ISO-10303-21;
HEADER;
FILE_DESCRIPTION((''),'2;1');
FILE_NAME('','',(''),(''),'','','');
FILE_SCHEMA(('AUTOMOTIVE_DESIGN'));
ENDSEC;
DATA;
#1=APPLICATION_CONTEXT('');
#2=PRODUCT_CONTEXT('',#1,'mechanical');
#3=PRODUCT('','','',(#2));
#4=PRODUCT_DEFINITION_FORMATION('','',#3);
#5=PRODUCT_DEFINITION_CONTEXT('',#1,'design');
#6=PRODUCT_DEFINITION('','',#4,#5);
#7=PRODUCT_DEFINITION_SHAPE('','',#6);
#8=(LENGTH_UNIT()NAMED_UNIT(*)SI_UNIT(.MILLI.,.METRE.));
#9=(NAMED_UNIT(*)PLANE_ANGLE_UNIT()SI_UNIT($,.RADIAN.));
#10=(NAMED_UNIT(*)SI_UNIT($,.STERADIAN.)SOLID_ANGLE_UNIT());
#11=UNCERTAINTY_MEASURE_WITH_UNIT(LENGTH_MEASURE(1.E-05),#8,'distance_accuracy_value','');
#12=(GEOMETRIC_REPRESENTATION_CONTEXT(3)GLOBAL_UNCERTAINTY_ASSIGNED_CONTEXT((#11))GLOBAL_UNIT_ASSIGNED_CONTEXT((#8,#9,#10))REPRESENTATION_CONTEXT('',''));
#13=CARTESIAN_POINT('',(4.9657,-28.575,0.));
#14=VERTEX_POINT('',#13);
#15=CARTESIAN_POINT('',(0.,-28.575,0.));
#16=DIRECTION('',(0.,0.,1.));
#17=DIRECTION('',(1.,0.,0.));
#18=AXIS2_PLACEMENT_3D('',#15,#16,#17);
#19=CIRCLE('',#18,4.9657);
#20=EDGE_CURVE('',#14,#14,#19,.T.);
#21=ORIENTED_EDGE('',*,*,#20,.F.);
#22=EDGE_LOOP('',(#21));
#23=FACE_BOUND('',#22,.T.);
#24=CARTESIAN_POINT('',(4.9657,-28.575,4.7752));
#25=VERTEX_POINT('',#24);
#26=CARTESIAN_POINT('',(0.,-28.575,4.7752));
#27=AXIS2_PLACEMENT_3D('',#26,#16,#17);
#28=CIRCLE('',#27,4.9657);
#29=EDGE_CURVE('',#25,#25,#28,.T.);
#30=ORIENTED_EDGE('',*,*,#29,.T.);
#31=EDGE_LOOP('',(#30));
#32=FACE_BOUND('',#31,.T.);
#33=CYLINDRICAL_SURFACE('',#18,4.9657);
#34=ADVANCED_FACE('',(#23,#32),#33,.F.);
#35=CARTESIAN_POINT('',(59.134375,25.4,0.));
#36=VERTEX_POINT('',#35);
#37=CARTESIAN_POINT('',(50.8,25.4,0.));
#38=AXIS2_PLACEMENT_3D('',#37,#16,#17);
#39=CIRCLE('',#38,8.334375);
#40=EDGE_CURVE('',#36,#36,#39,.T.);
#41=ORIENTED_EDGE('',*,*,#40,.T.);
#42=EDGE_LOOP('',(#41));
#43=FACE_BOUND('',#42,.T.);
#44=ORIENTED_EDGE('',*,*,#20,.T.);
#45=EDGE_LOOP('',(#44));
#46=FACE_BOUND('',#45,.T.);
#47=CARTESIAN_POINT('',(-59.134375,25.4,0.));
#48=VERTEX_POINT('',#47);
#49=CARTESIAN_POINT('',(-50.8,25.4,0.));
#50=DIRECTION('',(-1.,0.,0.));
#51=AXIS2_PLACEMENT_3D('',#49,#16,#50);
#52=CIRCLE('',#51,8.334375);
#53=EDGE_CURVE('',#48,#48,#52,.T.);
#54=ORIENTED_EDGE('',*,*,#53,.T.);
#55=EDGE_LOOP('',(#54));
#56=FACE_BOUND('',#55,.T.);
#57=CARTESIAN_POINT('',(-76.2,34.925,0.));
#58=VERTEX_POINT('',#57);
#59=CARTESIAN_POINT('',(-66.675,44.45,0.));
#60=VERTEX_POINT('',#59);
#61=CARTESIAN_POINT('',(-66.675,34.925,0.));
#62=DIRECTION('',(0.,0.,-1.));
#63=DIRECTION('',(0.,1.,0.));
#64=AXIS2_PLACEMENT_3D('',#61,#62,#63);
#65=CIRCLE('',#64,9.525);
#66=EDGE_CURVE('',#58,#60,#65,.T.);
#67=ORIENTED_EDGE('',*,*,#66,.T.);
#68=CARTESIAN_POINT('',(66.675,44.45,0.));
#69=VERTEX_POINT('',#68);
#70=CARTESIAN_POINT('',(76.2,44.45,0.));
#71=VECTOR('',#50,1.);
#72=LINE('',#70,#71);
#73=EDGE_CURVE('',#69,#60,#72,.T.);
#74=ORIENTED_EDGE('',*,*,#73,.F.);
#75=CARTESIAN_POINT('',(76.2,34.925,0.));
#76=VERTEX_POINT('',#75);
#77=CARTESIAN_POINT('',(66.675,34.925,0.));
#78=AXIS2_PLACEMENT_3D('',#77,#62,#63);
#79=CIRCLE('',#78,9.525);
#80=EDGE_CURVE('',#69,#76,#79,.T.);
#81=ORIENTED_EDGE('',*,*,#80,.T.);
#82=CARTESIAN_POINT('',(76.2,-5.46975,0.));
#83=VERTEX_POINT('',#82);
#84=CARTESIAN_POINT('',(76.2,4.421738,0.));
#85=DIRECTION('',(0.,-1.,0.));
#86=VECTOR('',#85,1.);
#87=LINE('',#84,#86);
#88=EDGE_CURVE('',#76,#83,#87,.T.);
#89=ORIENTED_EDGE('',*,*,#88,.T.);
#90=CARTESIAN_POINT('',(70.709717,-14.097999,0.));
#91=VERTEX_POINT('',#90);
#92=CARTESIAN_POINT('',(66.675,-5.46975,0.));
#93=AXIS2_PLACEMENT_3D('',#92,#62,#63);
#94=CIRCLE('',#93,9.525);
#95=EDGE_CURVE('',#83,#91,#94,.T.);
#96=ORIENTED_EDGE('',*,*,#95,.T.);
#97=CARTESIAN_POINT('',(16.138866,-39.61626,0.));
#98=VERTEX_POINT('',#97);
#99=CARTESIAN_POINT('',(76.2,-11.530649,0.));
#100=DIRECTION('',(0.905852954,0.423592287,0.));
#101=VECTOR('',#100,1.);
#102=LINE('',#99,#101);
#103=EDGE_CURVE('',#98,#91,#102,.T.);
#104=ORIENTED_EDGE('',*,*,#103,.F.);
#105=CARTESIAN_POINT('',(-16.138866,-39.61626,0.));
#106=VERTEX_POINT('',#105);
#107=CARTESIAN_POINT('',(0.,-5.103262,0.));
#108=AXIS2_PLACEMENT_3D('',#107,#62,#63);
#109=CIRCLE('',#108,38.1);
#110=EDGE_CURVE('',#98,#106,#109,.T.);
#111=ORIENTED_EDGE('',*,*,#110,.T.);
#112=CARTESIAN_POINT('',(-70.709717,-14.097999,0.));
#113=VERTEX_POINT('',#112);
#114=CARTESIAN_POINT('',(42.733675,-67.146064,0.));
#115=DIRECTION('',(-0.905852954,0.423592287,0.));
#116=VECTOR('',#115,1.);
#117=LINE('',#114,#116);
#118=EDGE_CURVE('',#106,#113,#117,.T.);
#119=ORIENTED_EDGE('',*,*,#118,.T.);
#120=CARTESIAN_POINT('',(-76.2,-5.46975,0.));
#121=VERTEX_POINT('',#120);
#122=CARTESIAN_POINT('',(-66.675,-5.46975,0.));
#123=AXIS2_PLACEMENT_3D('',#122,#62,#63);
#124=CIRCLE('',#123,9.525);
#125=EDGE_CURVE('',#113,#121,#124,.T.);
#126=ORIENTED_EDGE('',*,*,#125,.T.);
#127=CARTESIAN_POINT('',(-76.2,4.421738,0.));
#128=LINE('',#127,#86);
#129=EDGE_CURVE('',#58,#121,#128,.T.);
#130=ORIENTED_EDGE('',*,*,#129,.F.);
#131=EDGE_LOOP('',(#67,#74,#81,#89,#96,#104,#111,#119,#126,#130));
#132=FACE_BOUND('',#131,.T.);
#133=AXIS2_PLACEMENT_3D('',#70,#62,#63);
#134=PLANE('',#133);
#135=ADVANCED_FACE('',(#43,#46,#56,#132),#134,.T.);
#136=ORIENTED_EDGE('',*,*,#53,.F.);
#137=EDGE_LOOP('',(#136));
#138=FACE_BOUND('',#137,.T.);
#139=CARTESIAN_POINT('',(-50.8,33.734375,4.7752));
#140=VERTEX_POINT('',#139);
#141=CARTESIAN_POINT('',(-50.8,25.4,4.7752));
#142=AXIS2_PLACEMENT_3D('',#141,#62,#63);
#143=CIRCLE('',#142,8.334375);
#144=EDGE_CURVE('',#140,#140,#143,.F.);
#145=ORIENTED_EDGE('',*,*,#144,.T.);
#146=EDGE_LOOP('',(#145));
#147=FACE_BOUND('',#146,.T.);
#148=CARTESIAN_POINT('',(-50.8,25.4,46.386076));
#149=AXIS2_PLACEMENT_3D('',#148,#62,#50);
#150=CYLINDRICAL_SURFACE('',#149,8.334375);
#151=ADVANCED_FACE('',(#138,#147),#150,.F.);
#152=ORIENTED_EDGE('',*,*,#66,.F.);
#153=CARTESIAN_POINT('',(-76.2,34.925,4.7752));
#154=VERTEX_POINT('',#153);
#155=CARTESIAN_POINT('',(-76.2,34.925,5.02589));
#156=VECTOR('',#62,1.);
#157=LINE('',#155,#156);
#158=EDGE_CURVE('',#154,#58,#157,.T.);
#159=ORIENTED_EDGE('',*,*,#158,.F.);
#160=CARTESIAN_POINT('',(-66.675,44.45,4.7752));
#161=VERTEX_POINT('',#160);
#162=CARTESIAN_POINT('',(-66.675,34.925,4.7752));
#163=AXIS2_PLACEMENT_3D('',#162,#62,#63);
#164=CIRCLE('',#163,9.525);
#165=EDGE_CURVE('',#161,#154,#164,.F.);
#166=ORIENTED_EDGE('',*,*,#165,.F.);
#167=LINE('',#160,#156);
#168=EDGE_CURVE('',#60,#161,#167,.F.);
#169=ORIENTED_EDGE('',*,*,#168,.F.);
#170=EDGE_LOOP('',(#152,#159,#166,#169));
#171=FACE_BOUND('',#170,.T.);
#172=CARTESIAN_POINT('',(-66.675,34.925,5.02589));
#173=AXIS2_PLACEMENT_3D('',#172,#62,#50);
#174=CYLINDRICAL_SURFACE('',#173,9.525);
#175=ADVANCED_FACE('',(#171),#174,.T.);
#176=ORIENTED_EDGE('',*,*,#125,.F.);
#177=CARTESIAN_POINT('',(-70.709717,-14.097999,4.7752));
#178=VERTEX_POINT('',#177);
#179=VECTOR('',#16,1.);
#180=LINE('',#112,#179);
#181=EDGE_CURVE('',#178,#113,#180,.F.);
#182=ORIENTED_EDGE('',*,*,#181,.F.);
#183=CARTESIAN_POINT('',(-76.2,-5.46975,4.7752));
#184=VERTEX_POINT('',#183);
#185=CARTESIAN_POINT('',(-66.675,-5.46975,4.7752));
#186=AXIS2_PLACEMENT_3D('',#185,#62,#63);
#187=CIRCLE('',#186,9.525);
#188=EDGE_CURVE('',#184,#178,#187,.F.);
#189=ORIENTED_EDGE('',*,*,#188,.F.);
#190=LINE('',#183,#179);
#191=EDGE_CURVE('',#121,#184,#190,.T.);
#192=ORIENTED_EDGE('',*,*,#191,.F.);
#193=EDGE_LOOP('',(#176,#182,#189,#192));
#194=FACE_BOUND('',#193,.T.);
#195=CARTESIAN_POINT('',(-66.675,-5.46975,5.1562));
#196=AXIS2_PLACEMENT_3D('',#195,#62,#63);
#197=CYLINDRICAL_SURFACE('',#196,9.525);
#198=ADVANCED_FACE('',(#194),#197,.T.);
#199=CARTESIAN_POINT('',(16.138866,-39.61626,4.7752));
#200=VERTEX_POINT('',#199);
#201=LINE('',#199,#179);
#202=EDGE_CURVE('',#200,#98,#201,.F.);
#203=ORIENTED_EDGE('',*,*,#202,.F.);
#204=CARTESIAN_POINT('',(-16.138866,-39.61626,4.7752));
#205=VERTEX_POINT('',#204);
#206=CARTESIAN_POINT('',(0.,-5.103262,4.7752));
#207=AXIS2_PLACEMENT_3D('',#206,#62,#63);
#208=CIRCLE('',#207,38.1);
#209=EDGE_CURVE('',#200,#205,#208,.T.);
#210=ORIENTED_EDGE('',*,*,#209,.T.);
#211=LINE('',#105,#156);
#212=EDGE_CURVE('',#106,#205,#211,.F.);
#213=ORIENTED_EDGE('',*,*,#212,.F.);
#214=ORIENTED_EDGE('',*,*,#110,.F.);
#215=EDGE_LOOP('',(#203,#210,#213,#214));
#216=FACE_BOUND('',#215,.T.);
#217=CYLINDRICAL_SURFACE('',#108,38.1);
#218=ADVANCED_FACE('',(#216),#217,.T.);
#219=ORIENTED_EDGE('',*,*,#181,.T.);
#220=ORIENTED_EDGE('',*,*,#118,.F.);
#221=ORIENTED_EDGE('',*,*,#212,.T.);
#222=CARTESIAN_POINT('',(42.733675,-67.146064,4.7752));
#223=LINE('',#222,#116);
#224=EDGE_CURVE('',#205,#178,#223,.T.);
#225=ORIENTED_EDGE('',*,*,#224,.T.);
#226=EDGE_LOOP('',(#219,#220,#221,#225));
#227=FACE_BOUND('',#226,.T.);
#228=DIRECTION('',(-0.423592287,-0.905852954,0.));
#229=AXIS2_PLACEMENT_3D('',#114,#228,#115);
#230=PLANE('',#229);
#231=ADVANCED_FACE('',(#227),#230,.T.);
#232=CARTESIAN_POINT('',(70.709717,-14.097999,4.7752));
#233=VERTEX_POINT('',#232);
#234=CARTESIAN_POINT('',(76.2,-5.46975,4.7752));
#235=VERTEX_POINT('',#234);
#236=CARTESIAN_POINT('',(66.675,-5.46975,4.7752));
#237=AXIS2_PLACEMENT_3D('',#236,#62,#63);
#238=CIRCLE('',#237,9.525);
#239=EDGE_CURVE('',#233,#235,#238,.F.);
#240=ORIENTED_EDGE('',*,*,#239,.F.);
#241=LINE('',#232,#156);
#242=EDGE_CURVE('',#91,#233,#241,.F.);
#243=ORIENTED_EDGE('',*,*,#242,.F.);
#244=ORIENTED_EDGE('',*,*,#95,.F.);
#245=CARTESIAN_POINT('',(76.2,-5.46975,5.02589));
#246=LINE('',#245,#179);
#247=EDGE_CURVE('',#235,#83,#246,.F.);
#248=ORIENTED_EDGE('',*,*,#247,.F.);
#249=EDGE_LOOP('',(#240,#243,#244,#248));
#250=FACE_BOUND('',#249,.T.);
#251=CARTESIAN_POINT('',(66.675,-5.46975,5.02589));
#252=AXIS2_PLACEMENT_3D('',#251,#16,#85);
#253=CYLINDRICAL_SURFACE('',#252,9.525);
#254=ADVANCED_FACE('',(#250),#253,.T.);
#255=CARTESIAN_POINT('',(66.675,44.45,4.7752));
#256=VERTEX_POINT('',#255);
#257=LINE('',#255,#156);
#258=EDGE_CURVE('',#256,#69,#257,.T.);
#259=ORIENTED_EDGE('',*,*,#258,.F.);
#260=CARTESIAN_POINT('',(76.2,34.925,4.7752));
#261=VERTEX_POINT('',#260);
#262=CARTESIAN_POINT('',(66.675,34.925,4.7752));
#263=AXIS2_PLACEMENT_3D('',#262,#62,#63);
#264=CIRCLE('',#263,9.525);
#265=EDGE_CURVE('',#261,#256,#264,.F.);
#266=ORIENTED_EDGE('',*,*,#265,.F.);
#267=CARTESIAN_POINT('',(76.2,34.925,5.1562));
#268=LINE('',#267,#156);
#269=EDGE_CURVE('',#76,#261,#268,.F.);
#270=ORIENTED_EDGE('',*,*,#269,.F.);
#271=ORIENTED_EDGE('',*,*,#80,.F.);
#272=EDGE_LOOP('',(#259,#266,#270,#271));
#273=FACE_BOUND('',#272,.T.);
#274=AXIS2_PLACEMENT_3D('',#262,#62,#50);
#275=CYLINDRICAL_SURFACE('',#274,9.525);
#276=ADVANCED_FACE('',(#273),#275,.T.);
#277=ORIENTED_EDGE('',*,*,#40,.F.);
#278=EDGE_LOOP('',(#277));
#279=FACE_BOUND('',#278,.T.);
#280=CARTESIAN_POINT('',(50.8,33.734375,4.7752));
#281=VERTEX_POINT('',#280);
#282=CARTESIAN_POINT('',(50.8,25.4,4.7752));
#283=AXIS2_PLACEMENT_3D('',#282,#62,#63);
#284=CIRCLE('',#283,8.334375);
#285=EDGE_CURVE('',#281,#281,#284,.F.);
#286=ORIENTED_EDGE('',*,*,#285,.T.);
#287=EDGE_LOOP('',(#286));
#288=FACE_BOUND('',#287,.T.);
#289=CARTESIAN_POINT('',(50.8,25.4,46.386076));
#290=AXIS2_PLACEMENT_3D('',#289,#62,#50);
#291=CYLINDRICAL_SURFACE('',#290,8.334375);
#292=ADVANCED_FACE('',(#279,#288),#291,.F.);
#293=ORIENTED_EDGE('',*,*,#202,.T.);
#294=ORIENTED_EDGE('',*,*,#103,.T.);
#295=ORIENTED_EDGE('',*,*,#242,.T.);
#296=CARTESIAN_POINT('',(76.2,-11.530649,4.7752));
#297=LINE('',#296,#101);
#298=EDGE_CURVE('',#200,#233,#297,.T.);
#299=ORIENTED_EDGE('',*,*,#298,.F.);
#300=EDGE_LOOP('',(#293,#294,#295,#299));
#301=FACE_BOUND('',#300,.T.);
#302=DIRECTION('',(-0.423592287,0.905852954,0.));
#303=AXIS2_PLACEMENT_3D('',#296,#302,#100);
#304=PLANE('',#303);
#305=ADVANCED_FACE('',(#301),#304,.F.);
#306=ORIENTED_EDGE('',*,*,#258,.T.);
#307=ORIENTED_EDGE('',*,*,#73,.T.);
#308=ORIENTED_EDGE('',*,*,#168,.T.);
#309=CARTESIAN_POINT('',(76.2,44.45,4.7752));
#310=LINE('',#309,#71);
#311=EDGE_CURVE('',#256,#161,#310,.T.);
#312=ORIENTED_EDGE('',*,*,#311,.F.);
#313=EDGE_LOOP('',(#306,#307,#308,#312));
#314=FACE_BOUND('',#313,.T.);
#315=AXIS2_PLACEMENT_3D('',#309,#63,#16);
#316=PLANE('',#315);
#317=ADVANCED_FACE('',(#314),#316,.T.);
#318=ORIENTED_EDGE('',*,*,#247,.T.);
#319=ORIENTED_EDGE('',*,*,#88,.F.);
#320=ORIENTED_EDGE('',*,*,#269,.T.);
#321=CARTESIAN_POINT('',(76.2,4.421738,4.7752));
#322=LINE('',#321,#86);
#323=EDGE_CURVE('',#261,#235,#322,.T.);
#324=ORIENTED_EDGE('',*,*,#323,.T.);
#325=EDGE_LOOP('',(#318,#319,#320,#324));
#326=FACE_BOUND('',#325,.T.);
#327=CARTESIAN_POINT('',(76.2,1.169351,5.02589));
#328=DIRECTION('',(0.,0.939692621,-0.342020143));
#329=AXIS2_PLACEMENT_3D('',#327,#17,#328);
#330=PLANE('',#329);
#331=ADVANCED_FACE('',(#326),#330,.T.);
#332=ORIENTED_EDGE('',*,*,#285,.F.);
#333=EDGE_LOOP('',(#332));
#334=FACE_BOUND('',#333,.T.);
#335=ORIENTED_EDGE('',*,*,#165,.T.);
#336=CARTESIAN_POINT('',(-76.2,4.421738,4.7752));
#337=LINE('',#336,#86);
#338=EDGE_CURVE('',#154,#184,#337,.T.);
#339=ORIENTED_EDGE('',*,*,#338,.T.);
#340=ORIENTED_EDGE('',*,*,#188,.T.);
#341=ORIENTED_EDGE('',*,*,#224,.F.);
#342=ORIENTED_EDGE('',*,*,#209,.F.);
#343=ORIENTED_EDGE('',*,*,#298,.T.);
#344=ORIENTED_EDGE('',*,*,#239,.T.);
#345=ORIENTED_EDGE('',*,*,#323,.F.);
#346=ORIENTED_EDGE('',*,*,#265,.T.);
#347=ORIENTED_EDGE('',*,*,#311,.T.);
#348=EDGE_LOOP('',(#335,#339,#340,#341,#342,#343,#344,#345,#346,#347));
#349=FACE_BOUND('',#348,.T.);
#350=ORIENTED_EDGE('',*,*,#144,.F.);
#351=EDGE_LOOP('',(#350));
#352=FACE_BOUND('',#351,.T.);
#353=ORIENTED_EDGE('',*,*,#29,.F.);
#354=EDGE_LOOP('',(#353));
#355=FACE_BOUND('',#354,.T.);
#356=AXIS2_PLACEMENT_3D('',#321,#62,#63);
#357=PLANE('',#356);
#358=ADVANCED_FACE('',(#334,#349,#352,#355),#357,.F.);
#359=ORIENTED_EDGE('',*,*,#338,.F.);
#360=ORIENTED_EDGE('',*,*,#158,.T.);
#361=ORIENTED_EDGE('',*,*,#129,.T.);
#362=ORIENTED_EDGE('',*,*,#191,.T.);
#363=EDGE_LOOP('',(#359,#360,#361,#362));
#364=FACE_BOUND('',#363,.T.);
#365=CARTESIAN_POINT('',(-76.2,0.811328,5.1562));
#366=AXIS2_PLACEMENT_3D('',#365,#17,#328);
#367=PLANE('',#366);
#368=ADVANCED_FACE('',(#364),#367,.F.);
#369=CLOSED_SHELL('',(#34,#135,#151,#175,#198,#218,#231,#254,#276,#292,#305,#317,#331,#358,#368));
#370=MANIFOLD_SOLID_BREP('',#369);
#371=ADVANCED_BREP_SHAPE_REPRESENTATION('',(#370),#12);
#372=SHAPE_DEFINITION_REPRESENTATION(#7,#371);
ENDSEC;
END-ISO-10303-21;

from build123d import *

# Parameters (mm, degrees)
BASE_FLANGE1_DEPTH    = 76.2
CUT_EXTRUDE1_DEPTH    = 100.11903454
SKETCH4_R             = 8.334375
CUT_EXTRUDE2_DEPTH    = 100.669004783
FILLET1_R             = 9.525
FLAT_PATTERN1_START   = 4.7752
FLAT_PATTERN1_DEPTH   = 41.610875653
FLAT_PATTERN1_2_DEPTH = 4.7752
SKETCH6_R             = 4.9657
CUT_EXTRUDE4_DEPTH    = 89.346165933


# Read off the part's stored shape, not the designer's step: Flat-Pattern1
# Sheet-metal steps are written as plain solids
with BuildPart() as part:
    # Sketch1 → Base-Flange1 (new, symmetric)
    with BuildSketch(Plane(origin=(0, 0, 0), x_dir=(0, 0, -1), z_dir=(1, 0, 0))):
        with BuildLine():
            Line((0, 44.45), (0, 3.610410109))
            ThreePointArc((0, 3.610410109), (-0.932488229, 0.652935287), (-3.392675737, -1.234832983))
            Line((-3.392675737, -1.234832983), (-44.752861065, -16.288709326))
            Line((-44.752861065, -16.288709326), (-46.386075653, -11.801489123))
            Line((-46.386075653, -11.801489123), (-5.025890325, 3.25238722))
            ThreePointArc((-5.025890325, 3.25238722), (-4.844103071, 3.391877486), (-4.7752, 3.610410109))
            Line((-4.7752, 3.610410109), (-4.7752, 44.45))
            Line((-4.7752, 44.45), (0, 44.45))
        make_face()
    extrude(amount=BASE_FLANGE1_DEPTH, both=True)

    # Sketch3 → Cut-Extrude1 (cut, through all)
    with BuildSketch(Plane(origin=(0, -7.918276224, 35.717035898), x_dir=(1, 0, 0), z_dir=(0, -0.9396926207859093, -0.3420201433256664))):
        with BuildLine():
            Line((-76.2, -20.318857819), (-16.138866151, 7.766752504))
            ThreePointArc((-16.138866151, 7.766752504), (0, 11.353754961), (16.138866151, 7.766752504))
            Line((16.138866151, 7.766752504), (76.2, -20.318857819))
            Line((76.2, -20.318857819), (88.840930233, -20.318857819))
            Line((88.840930233, -20.318857819), (88.840930233, 63.227466393))
            Line((88.840930233, 63.227466393), (-88.840930233, 63.227466393))
            Line((-88.840930233, 63.227466393), (-88.840930233, -20.318857819))
            Line((-88.840930233, -20.318857819), (-76.2, -20.318857819))
        make_face()
    extrude(amount=CUT_EXTRUDE1_DEPTH, mode=Mode.SUBTRACT)

    # Sketch4 → Cut-Extrude2 (cut, through all)
    with BuildSketch(Plane.XY):
        with Locations(Location((50.8, 25.4, 0), (0, 0, 90))):
            Circle(SKETCH4_R)
        with Locations(Location((-50.8, 25.4, 0), (0, 0, 180))):
            Circle(SKETCH4_R)
    extrude(amount=CUT_EXTRUDE2_DEPTH, mode=Mode.SUBTRACT)

    # Fillet1
    fillet1_edges = [part.edges().sort_by_distance(p)[0] for p in [
        (76.2, 44.45, 2.3876),
        (-76.2, -3.212427662, 15.806947849),
        (76.2, -3.212427662, 15.806947849),
        (-76.2, 44.45, 2.3876),
    ]]
    fillet(fillet1_edges, radius=FILLET1_R)

    # Flat-Pattern1 outline → Flat-Pattern1 (cut)
    with BuildSketch(Plane.XY.offset(FLAT_PATTERN1_START)):
        with BuildLine():
            ThreePointArc((70.709716538, -14.097999428), (74.711053136, -10.58321022), (76.2, -5.469750042))
            Line((76.2, -5.469750042), (76.2, 5))
            Line((76.2, 5), (-76.2, 5))
            Line((-76.2, 5), (-76.2, -5.469750042))
            ThreePointArc((-76.2, -5.469750042), (-74.711053136, -10.58321022), (-70.709716538, -14.097999428))
            Line((-70.709716538, -14.097999428), (-16.138866151, -39.616259585))
            ThreePointArc((-16.138866151, -39.616259585), (0, -43.203262043), (16.138866151, -39.616259585))
            Line((16.138866151, -39.616259585), (70.709716538, -14.097999428))
        make_face()
    extrude(amount=FLAT_PATTERN1_DEPTH, mode=Mode.SUBTRACT)

    # Flat-Pattern1 2 outline → Flat-Pattern1 2 (add)
    with BuildSketch(Plane.XY):
        with BuildLine():
            ThreePointArc((70.709716538, -14.097999428), (74.711053136, -10.58321022), (76.2, -5.469750042))
            Line((76.2, -5.469750042), (76.2, 5))
            Line((76.2, 5), (-76.2, 5))
            Line((-76.2, 5), (-76.2, -5.469750042))
            ThreePointArc((-76.2, -5.469750042), (-74.711053136, -10.58321022), (-70.709716538, -14.097999428))
            Line((-70.709716538, -14.097999428), (-16.138866151, -39.616259585))
            ThreePointArc((-16.138866151, -39.616259585), (0, -43.203262043), (16.138866151, -39.616259585))
            Line((16.138866151, -39.616259585), (70.709716538, -14.097999428))
        make_face()
    extrude(amount=FLAT_PATTERN1_2_DEPTH)

    # Sketch6 → Cut-Extrude4 (cut, through all)
    with BuildSketch(Plane.XY.offset(4.7752)):
        with Locations((0, -28.575)):
            Circle(SKETCH6_R)
    extrude(amount=-CUT_EXTRUDE4_DEPTH, mode=Mode.SUBTRACT)


solid = part.part
